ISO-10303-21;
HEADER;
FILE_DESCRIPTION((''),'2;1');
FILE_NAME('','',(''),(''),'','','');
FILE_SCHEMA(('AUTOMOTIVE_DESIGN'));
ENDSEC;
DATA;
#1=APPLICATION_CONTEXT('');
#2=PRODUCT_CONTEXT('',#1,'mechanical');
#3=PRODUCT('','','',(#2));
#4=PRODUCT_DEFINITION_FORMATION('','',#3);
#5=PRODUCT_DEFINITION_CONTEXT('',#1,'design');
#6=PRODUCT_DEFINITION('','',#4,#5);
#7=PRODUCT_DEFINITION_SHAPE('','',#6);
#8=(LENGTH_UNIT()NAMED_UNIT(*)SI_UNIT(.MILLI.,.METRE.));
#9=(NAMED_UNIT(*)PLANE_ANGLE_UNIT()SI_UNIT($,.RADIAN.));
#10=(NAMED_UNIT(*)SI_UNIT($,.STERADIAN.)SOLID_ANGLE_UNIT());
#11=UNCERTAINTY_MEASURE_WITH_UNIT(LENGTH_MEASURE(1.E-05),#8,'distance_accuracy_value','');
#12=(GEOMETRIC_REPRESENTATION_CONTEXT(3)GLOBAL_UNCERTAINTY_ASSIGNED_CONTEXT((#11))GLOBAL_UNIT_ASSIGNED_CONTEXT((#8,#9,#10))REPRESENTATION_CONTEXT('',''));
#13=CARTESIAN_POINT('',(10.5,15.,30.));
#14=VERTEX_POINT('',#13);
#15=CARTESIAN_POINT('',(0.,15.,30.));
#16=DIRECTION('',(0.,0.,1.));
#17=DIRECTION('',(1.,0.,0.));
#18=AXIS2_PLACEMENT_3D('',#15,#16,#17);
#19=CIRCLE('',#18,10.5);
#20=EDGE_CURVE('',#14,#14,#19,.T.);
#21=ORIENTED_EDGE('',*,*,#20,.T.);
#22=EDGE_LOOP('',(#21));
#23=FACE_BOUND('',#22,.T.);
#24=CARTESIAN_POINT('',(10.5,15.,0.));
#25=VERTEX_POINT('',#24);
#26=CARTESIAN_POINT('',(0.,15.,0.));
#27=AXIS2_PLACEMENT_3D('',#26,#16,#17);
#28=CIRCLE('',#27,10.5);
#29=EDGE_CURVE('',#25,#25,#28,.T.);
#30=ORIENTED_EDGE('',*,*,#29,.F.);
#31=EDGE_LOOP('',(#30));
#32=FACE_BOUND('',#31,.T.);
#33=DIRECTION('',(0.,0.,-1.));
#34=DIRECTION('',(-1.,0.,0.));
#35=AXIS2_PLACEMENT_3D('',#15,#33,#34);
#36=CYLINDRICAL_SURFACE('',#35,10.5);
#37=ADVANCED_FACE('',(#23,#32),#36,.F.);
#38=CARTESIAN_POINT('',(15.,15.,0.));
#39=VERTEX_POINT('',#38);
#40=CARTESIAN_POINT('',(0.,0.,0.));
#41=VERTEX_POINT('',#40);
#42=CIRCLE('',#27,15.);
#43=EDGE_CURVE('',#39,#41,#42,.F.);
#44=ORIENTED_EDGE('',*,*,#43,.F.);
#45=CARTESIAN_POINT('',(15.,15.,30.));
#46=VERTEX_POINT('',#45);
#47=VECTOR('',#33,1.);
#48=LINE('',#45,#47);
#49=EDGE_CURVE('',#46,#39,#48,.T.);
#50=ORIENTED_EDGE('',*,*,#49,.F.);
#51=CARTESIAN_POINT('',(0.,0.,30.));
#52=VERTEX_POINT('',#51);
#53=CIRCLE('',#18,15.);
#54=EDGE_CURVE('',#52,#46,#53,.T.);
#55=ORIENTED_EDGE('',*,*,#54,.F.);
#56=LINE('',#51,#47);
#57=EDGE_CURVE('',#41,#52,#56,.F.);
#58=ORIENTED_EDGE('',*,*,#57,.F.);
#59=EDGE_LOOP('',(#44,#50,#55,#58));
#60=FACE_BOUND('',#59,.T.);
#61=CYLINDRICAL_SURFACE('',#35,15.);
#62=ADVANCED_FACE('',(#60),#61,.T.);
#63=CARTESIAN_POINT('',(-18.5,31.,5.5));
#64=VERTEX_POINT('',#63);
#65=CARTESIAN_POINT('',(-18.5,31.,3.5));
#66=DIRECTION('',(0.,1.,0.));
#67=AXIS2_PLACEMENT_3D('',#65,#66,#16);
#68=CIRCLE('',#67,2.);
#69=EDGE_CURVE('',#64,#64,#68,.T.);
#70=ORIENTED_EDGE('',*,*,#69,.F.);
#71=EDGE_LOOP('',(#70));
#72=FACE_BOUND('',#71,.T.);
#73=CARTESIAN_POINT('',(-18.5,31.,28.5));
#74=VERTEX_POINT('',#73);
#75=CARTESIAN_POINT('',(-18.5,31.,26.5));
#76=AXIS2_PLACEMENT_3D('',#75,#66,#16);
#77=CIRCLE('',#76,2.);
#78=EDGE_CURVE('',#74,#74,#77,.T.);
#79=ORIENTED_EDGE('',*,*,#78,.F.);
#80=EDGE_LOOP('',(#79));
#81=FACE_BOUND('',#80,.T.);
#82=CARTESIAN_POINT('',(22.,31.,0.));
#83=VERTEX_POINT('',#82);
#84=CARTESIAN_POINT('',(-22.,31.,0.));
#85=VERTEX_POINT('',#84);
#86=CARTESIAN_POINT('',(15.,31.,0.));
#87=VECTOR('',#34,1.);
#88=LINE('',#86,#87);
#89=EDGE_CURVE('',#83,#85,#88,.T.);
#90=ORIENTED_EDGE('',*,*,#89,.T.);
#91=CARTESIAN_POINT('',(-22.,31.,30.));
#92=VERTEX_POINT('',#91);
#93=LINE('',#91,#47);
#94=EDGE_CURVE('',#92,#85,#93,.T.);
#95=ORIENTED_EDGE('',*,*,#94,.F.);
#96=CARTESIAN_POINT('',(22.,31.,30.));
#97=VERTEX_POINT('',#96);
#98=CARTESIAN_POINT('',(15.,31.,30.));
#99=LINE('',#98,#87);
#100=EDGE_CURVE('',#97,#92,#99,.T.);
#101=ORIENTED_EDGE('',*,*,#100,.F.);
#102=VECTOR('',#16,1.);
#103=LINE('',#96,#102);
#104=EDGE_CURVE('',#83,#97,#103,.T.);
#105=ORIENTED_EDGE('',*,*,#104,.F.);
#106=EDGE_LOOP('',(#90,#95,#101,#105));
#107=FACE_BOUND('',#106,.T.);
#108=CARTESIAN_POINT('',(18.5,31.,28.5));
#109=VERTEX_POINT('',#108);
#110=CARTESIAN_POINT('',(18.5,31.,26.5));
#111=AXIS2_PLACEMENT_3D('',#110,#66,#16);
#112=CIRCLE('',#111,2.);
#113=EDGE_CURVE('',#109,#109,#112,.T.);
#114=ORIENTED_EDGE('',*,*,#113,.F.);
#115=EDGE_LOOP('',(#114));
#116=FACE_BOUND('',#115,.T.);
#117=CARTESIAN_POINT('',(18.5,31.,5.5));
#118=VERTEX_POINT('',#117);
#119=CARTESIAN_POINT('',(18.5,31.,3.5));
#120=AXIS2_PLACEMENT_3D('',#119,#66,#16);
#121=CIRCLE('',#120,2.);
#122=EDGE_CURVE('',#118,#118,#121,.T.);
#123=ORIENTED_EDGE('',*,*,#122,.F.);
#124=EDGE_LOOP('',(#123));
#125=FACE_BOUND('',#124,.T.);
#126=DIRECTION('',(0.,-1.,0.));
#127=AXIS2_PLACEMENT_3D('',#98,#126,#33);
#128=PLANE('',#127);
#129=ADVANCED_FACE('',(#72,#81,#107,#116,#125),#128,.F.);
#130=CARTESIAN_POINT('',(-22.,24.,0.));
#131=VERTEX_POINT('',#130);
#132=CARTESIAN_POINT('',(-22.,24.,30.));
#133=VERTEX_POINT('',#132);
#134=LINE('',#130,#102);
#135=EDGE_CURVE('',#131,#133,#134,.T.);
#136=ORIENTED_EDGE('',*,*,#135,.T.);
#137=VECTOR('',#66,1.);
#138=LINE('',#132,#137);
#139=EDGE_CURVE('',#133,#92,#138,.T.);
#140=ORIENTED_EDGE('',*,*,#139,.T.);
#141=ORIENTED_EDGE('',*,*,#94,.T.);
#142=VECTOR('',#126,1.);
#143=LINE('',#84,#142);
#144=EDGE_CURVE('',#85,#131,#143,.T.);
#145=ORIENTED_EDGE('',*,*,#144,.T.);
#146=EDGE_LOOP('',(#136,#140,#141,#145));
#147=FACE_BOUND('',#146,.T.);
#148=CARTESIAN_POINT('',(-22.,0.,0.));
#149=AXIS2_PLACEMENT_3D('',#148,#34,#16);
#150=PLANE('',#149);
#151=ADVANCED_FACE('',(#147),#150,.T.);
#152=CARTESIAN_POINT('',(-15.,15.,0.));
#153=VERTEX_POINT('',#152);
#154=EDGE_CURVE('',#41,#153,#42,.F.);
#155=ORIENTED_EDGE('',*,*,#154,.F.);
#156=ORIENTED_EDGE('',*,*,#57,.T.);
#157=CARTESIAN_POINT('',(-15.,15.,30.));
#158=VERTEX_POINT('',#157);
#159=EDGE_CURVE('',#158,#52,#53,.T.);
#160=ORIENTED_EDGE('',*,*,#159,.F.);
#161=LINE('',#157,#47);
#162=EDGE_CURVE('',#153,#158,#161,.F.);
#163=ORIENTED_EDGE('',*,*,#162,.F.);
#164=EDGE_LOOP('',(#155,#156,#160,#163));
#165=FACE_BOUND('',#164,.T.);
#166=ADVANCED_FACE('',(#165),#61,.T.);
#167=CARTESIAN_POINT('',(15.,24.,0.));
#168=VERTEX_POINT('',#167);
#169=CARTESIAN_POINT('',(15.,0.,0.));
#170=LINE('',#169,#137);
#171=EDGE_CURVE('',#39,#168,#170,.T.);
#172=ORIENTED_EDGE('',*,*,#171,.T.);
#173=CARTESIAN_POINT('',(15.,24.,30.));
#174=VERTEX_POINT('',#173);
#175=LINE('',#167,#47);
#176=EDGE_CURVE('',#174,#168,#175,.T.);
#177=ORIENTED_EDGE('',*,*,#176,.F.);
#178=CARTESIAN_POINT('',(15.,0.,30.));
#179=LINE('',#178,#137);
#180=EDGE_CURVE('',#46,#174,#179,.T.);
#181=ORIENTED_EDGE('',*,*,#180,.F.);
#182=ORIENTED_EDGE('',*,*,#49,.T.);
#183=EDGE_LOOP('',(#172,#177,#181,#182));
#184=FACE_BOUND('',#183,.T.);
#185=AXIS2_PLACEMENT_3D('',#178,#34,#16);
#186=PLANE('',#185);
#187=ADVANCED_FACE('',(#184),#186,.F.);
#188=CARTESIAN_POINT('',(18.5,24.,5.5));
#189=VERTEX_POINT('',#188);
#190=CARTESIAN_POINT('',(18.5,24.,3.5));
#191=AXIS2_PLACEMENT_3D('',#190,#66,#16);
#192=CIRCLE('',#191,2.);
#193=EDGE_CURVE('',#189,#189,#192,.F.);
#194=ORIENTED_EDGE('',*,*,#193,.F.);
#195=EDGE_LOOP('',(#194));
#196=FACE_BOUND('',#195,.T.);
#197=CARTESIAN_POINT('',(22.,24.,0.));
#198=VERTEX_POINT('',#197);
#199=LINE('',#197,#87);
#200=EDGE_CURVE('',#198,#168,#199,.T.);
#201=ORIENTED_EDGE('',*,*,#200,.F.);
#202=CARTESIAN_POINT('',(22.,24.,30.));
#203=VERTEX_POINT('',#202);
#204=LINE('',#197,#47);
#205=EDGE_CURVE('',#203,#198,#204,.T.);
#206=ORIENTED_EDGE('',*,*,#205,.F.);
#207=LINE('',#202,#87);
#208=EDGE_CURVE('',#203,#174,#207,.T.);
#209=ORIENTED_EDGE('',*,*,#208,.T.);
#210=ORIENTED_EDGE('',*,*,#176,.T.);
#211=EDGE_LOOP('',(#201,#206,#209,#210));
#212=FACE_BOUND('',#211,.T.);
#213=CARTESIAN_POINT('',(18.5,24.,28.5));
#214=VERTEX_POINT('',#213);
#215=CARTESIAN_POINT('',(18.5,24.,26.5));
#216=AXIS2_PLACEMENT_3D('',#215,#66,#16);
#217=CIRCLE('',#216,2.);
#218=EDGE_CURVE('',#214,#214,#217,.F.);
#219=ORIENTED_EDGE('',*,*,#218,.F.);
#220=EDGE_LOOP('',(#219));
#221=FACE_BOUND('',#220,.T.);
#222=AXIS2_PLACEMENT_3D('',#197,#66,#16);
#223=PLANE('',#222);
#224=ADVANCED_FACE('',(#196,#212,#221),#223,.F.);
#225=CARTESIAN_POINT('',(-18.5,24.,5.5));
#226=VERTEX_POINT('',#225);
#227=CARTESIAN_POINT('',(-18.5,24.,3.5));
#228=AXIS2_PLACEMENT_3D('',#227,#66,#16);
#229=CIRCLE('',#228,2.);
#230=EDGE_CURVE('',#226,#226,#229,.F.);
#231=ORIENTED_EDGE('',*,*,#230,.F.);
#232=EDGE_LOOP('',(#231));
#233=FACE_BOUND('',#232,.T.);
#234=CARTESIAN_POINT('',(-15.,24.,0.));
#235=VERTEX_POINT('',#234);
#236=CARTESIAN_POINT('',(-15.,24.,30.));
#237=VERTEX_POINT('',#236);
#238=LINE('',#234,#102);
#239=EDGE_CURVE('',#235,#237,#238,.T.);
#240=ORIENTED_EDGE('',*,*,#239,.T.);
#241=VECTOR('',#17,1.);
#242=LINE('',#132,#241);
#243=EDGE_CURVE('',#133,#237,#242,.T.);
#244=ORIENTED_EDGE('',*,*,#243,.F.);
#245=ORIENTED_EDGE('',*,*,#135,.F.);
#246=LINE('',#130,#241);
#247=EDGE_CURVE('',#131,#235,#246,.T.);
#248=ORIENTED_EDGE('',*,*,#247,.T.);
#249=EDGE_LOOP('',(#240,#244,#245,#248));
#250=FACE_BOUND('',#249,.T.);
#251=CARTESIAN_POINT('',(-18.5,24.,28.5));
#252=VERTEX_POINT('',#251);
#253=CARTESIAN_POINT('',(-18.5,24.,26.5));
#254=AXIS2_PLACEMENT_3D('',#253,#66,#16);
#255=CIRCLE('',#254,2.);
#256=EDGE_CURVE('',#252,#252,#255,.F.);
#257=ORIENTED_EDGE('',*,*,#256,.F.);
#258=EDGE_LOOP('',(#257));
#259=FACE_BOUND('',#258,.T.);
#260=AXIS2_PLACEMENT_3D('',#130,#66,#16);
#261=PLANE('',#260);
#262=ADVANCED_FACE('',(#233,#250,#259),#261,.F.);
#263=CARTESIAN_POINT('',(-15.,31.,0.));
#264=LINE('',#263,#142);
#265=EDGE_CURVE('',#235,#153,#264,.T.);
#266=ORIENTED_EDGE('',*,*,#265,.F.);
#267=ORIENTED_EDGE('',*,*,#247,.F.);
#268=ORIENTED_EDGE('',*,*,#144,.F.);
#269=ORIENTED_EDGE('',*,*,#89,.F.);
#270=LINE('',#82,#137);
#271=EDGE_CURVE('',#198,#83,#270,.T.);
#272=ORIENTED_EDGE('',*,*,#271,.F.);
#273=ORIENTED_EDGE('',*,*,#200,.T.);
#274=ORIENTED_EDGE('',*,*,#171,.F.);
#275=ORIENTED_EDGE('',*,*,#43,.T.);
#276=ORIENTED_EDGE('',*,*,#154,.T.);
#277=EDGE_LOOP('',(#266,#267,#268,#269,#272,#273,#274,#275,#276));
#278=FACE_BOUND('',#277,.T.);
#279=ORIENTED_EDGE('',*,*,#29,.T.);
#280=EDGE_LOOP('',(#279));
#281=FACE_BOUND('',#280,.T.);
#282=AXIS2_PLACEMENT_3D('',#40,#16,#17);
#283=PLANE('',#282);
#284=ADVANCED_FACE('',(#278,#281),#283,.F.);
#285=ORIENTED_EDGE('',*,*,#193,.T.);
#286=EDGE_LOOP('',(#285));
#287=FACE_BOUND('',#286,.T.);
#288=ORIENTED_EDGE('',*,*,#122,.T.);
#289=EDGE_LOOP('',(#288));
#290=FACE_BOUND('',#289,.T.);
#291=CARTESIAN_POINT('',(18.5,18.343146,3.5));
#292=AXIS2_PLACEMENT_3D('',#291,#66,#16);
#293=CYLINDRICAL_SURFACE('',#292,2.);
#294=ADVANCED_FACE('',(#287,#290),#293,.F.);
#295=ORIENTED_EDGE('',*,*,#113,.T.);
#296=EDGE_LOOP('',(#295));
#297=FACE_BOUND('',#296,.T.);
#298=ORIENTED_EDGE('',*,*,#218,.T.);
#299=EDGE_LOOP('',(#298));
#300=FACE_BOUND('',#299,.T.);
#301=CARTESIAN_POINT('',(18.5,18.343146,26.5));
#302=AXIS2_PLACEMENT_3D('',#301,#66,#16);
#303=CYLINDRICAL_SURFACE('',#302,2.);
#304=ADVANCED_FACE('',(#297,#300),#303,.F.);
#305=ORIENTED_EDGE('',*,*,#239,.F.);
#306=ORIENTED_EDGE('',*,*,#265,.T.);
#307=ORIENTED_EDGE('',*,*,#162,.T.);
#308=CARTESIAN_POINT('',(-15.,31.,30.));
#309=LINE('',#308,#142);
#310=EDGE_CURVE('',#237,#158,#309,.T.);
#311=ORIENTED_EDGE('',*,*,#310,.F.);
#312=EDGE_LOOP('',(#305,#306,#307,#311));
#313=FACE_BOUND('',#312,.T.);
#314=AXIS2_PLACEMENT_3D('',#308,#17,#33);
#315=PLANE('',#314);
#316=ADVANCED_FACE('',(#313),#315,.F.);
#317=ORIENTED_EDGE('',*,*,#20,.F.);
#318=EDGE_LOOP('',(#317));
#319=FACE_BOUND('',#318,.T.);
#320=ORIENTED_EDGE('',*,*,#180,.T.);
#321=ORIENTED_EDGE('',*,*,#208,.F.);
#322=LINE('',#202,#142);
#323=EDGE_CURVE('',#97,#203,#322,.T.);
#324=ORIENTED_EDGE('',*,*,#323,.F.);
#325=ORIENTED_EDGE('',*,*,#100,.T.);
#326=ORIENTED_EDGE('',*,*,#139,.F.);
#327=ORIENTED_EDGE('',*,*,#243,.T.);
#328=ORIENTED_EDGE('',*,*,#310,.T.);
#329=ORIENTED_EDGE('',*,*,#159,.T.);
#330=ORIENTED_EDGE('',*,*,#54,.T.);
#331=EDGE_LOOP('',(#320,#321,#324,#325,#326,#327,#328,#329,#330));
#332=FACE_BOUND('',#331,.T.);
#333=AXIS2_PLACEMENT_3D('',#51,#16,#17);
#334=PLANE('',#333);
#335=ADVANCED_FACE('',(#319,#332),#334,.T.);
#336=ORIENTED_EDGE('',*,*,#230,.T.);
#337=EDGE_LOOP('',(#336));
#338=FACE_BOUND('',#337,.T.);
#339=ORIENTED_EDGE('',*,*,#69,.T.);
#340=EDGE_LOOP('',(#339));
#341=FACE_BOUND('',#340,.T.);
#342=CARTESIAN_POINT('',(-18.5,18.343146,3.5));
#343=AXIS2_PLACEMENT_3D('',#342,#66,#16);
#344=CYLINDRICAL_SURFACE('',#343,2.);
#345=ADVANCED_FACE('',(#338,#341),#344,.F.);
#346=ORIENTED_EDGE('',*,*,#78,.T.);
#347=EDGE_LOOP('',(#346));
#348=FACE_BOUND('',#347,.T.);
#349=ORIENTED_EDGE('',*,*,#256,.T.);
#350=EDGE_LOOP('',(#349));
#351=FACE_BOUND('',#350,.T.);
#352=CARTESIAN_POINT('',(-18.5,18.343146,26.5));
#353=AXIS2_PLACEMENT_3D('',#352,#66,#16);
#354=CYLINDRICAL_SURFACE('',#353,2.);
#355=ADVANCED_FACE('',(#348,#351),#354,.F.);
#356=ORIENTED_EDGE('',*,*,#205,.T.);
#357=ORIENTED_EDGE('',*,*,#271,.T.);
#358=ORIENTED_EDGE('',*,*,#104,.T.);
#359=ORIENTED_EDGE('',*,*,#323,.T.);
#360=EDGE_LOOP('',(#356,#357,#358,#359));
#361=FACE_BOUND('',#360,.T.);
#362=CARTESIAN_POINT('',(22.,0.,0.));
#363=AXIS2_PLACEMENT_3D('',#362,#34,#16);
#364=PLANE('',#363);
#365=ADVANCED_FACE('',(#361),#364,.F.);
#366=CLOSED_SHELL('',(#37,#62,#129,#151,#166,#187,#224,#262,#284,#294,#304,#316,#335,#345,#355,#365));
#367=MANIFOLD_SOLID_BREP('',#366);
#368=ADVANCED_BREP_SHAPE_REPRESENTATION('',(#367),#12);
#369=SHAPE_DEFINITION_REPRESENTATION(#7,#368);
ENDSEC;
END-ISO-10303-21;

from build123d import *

# Parameters (mm, degrees)
SKETCH_1_W          = 30
SKETCH_1_H          = 31
SKETCH_1_R          = 10.5
EXTRUDE_1_DEPTH     = 30
FILLET_1_R          = 15
FILLET_2_R          = 15
SKETCH_2_W          = 30
SKETCH_2_H          = 7
EXTRUDE_2_DEPTH     = 7
SKETCH_3_W          = 30
SKETCH_3_H          = 7
EXTRUDE_3_DEPTH     = 7
SKETCH_4_R          = 2
CUT_EXTRUDE_1_DEPTH = 7


with BuildPart() as part:
    # Эскиз1 → Бобышка-Вытянуть1 (new body)
    with BuildSketch(Plane.XY):
        with Locations((0, 15.5)):
            Rectangle(SKETCH_1_W, SKETCH_1_H)
        with Locations((0, 15)):
            Circle(SKETCH_1_R, mode=Mode.SUBTRACT)
    extrude(amount=EXTRUDE_1_DEPTH)

    # Скругление1
    fillet_1_edges = [part.edges().sort_by_distance(p)[0] for p in [
        (15, 0, 15),
    ]]
    fillet(fillet_1_edges, radius=FILLET_1_R)

    # Скругление2
    fillet_2_edges = [part.edges().sort_by_distance(p)[0] for p in [
        (-15, 0, 15),
    ]]
    fillet(fillet_2_edges, radius=FILLET_2_R - 0.0001)  # a hair under: the kernel refuses the full size

    # Эскиз2 → Бобышка-Вытянуть2 (add)
    with BuildSketch(Plane(origin=(15, 0, 0), x_dir=(0, 0, -1), z_dir=(1, 0, 0))):
        with Locations((-15, 27.5)):
            Rectangle(SKETCH_2_W, SKETCH_2_H)
    extrude(amount=EXTRUDE_2_DEPTH)

    # Эскиз3 → Бобышка-Вытянуть3 (add)
    with BuildSketch(Plane.ZY.offset(15)):
        with Locations((15, 27.5)):
            Rectangle(SKETCH_3_W, SKETCH_3_H)
    extrude(amount=EXTRUDE_3_DEPTH)

    # Эскиз4 → Вырез-Вытянуть1 (cut)
    with BuildSketch(Plane(origin=(0, 31, 0), x_dir=(1, 0, 0), z_dir=(0, 1, 0))):
        with Locations(Location((18.5, -3.5, 0), (0, 0, 270))):
            Circle(SKETCH_4_R)
        with Locations(Location((18.5, -26.5, 0), (0, 0, 270))):
            Circle(SKETCH_4_R)
        with Locations(Location((-18.5, -26.5, 0), (0, 0, 270))):
            Circle(SKETCH_4_R)
        with Locations(Location((-18.5, -3.5, 0), (0, 0, 270))):
            Circle(SKETCH_4_R)
    extrude(amount=-CUT_EXTRUDE_1_DEPTH, mode=Mode.SUBTRACT)


solid = part.part
